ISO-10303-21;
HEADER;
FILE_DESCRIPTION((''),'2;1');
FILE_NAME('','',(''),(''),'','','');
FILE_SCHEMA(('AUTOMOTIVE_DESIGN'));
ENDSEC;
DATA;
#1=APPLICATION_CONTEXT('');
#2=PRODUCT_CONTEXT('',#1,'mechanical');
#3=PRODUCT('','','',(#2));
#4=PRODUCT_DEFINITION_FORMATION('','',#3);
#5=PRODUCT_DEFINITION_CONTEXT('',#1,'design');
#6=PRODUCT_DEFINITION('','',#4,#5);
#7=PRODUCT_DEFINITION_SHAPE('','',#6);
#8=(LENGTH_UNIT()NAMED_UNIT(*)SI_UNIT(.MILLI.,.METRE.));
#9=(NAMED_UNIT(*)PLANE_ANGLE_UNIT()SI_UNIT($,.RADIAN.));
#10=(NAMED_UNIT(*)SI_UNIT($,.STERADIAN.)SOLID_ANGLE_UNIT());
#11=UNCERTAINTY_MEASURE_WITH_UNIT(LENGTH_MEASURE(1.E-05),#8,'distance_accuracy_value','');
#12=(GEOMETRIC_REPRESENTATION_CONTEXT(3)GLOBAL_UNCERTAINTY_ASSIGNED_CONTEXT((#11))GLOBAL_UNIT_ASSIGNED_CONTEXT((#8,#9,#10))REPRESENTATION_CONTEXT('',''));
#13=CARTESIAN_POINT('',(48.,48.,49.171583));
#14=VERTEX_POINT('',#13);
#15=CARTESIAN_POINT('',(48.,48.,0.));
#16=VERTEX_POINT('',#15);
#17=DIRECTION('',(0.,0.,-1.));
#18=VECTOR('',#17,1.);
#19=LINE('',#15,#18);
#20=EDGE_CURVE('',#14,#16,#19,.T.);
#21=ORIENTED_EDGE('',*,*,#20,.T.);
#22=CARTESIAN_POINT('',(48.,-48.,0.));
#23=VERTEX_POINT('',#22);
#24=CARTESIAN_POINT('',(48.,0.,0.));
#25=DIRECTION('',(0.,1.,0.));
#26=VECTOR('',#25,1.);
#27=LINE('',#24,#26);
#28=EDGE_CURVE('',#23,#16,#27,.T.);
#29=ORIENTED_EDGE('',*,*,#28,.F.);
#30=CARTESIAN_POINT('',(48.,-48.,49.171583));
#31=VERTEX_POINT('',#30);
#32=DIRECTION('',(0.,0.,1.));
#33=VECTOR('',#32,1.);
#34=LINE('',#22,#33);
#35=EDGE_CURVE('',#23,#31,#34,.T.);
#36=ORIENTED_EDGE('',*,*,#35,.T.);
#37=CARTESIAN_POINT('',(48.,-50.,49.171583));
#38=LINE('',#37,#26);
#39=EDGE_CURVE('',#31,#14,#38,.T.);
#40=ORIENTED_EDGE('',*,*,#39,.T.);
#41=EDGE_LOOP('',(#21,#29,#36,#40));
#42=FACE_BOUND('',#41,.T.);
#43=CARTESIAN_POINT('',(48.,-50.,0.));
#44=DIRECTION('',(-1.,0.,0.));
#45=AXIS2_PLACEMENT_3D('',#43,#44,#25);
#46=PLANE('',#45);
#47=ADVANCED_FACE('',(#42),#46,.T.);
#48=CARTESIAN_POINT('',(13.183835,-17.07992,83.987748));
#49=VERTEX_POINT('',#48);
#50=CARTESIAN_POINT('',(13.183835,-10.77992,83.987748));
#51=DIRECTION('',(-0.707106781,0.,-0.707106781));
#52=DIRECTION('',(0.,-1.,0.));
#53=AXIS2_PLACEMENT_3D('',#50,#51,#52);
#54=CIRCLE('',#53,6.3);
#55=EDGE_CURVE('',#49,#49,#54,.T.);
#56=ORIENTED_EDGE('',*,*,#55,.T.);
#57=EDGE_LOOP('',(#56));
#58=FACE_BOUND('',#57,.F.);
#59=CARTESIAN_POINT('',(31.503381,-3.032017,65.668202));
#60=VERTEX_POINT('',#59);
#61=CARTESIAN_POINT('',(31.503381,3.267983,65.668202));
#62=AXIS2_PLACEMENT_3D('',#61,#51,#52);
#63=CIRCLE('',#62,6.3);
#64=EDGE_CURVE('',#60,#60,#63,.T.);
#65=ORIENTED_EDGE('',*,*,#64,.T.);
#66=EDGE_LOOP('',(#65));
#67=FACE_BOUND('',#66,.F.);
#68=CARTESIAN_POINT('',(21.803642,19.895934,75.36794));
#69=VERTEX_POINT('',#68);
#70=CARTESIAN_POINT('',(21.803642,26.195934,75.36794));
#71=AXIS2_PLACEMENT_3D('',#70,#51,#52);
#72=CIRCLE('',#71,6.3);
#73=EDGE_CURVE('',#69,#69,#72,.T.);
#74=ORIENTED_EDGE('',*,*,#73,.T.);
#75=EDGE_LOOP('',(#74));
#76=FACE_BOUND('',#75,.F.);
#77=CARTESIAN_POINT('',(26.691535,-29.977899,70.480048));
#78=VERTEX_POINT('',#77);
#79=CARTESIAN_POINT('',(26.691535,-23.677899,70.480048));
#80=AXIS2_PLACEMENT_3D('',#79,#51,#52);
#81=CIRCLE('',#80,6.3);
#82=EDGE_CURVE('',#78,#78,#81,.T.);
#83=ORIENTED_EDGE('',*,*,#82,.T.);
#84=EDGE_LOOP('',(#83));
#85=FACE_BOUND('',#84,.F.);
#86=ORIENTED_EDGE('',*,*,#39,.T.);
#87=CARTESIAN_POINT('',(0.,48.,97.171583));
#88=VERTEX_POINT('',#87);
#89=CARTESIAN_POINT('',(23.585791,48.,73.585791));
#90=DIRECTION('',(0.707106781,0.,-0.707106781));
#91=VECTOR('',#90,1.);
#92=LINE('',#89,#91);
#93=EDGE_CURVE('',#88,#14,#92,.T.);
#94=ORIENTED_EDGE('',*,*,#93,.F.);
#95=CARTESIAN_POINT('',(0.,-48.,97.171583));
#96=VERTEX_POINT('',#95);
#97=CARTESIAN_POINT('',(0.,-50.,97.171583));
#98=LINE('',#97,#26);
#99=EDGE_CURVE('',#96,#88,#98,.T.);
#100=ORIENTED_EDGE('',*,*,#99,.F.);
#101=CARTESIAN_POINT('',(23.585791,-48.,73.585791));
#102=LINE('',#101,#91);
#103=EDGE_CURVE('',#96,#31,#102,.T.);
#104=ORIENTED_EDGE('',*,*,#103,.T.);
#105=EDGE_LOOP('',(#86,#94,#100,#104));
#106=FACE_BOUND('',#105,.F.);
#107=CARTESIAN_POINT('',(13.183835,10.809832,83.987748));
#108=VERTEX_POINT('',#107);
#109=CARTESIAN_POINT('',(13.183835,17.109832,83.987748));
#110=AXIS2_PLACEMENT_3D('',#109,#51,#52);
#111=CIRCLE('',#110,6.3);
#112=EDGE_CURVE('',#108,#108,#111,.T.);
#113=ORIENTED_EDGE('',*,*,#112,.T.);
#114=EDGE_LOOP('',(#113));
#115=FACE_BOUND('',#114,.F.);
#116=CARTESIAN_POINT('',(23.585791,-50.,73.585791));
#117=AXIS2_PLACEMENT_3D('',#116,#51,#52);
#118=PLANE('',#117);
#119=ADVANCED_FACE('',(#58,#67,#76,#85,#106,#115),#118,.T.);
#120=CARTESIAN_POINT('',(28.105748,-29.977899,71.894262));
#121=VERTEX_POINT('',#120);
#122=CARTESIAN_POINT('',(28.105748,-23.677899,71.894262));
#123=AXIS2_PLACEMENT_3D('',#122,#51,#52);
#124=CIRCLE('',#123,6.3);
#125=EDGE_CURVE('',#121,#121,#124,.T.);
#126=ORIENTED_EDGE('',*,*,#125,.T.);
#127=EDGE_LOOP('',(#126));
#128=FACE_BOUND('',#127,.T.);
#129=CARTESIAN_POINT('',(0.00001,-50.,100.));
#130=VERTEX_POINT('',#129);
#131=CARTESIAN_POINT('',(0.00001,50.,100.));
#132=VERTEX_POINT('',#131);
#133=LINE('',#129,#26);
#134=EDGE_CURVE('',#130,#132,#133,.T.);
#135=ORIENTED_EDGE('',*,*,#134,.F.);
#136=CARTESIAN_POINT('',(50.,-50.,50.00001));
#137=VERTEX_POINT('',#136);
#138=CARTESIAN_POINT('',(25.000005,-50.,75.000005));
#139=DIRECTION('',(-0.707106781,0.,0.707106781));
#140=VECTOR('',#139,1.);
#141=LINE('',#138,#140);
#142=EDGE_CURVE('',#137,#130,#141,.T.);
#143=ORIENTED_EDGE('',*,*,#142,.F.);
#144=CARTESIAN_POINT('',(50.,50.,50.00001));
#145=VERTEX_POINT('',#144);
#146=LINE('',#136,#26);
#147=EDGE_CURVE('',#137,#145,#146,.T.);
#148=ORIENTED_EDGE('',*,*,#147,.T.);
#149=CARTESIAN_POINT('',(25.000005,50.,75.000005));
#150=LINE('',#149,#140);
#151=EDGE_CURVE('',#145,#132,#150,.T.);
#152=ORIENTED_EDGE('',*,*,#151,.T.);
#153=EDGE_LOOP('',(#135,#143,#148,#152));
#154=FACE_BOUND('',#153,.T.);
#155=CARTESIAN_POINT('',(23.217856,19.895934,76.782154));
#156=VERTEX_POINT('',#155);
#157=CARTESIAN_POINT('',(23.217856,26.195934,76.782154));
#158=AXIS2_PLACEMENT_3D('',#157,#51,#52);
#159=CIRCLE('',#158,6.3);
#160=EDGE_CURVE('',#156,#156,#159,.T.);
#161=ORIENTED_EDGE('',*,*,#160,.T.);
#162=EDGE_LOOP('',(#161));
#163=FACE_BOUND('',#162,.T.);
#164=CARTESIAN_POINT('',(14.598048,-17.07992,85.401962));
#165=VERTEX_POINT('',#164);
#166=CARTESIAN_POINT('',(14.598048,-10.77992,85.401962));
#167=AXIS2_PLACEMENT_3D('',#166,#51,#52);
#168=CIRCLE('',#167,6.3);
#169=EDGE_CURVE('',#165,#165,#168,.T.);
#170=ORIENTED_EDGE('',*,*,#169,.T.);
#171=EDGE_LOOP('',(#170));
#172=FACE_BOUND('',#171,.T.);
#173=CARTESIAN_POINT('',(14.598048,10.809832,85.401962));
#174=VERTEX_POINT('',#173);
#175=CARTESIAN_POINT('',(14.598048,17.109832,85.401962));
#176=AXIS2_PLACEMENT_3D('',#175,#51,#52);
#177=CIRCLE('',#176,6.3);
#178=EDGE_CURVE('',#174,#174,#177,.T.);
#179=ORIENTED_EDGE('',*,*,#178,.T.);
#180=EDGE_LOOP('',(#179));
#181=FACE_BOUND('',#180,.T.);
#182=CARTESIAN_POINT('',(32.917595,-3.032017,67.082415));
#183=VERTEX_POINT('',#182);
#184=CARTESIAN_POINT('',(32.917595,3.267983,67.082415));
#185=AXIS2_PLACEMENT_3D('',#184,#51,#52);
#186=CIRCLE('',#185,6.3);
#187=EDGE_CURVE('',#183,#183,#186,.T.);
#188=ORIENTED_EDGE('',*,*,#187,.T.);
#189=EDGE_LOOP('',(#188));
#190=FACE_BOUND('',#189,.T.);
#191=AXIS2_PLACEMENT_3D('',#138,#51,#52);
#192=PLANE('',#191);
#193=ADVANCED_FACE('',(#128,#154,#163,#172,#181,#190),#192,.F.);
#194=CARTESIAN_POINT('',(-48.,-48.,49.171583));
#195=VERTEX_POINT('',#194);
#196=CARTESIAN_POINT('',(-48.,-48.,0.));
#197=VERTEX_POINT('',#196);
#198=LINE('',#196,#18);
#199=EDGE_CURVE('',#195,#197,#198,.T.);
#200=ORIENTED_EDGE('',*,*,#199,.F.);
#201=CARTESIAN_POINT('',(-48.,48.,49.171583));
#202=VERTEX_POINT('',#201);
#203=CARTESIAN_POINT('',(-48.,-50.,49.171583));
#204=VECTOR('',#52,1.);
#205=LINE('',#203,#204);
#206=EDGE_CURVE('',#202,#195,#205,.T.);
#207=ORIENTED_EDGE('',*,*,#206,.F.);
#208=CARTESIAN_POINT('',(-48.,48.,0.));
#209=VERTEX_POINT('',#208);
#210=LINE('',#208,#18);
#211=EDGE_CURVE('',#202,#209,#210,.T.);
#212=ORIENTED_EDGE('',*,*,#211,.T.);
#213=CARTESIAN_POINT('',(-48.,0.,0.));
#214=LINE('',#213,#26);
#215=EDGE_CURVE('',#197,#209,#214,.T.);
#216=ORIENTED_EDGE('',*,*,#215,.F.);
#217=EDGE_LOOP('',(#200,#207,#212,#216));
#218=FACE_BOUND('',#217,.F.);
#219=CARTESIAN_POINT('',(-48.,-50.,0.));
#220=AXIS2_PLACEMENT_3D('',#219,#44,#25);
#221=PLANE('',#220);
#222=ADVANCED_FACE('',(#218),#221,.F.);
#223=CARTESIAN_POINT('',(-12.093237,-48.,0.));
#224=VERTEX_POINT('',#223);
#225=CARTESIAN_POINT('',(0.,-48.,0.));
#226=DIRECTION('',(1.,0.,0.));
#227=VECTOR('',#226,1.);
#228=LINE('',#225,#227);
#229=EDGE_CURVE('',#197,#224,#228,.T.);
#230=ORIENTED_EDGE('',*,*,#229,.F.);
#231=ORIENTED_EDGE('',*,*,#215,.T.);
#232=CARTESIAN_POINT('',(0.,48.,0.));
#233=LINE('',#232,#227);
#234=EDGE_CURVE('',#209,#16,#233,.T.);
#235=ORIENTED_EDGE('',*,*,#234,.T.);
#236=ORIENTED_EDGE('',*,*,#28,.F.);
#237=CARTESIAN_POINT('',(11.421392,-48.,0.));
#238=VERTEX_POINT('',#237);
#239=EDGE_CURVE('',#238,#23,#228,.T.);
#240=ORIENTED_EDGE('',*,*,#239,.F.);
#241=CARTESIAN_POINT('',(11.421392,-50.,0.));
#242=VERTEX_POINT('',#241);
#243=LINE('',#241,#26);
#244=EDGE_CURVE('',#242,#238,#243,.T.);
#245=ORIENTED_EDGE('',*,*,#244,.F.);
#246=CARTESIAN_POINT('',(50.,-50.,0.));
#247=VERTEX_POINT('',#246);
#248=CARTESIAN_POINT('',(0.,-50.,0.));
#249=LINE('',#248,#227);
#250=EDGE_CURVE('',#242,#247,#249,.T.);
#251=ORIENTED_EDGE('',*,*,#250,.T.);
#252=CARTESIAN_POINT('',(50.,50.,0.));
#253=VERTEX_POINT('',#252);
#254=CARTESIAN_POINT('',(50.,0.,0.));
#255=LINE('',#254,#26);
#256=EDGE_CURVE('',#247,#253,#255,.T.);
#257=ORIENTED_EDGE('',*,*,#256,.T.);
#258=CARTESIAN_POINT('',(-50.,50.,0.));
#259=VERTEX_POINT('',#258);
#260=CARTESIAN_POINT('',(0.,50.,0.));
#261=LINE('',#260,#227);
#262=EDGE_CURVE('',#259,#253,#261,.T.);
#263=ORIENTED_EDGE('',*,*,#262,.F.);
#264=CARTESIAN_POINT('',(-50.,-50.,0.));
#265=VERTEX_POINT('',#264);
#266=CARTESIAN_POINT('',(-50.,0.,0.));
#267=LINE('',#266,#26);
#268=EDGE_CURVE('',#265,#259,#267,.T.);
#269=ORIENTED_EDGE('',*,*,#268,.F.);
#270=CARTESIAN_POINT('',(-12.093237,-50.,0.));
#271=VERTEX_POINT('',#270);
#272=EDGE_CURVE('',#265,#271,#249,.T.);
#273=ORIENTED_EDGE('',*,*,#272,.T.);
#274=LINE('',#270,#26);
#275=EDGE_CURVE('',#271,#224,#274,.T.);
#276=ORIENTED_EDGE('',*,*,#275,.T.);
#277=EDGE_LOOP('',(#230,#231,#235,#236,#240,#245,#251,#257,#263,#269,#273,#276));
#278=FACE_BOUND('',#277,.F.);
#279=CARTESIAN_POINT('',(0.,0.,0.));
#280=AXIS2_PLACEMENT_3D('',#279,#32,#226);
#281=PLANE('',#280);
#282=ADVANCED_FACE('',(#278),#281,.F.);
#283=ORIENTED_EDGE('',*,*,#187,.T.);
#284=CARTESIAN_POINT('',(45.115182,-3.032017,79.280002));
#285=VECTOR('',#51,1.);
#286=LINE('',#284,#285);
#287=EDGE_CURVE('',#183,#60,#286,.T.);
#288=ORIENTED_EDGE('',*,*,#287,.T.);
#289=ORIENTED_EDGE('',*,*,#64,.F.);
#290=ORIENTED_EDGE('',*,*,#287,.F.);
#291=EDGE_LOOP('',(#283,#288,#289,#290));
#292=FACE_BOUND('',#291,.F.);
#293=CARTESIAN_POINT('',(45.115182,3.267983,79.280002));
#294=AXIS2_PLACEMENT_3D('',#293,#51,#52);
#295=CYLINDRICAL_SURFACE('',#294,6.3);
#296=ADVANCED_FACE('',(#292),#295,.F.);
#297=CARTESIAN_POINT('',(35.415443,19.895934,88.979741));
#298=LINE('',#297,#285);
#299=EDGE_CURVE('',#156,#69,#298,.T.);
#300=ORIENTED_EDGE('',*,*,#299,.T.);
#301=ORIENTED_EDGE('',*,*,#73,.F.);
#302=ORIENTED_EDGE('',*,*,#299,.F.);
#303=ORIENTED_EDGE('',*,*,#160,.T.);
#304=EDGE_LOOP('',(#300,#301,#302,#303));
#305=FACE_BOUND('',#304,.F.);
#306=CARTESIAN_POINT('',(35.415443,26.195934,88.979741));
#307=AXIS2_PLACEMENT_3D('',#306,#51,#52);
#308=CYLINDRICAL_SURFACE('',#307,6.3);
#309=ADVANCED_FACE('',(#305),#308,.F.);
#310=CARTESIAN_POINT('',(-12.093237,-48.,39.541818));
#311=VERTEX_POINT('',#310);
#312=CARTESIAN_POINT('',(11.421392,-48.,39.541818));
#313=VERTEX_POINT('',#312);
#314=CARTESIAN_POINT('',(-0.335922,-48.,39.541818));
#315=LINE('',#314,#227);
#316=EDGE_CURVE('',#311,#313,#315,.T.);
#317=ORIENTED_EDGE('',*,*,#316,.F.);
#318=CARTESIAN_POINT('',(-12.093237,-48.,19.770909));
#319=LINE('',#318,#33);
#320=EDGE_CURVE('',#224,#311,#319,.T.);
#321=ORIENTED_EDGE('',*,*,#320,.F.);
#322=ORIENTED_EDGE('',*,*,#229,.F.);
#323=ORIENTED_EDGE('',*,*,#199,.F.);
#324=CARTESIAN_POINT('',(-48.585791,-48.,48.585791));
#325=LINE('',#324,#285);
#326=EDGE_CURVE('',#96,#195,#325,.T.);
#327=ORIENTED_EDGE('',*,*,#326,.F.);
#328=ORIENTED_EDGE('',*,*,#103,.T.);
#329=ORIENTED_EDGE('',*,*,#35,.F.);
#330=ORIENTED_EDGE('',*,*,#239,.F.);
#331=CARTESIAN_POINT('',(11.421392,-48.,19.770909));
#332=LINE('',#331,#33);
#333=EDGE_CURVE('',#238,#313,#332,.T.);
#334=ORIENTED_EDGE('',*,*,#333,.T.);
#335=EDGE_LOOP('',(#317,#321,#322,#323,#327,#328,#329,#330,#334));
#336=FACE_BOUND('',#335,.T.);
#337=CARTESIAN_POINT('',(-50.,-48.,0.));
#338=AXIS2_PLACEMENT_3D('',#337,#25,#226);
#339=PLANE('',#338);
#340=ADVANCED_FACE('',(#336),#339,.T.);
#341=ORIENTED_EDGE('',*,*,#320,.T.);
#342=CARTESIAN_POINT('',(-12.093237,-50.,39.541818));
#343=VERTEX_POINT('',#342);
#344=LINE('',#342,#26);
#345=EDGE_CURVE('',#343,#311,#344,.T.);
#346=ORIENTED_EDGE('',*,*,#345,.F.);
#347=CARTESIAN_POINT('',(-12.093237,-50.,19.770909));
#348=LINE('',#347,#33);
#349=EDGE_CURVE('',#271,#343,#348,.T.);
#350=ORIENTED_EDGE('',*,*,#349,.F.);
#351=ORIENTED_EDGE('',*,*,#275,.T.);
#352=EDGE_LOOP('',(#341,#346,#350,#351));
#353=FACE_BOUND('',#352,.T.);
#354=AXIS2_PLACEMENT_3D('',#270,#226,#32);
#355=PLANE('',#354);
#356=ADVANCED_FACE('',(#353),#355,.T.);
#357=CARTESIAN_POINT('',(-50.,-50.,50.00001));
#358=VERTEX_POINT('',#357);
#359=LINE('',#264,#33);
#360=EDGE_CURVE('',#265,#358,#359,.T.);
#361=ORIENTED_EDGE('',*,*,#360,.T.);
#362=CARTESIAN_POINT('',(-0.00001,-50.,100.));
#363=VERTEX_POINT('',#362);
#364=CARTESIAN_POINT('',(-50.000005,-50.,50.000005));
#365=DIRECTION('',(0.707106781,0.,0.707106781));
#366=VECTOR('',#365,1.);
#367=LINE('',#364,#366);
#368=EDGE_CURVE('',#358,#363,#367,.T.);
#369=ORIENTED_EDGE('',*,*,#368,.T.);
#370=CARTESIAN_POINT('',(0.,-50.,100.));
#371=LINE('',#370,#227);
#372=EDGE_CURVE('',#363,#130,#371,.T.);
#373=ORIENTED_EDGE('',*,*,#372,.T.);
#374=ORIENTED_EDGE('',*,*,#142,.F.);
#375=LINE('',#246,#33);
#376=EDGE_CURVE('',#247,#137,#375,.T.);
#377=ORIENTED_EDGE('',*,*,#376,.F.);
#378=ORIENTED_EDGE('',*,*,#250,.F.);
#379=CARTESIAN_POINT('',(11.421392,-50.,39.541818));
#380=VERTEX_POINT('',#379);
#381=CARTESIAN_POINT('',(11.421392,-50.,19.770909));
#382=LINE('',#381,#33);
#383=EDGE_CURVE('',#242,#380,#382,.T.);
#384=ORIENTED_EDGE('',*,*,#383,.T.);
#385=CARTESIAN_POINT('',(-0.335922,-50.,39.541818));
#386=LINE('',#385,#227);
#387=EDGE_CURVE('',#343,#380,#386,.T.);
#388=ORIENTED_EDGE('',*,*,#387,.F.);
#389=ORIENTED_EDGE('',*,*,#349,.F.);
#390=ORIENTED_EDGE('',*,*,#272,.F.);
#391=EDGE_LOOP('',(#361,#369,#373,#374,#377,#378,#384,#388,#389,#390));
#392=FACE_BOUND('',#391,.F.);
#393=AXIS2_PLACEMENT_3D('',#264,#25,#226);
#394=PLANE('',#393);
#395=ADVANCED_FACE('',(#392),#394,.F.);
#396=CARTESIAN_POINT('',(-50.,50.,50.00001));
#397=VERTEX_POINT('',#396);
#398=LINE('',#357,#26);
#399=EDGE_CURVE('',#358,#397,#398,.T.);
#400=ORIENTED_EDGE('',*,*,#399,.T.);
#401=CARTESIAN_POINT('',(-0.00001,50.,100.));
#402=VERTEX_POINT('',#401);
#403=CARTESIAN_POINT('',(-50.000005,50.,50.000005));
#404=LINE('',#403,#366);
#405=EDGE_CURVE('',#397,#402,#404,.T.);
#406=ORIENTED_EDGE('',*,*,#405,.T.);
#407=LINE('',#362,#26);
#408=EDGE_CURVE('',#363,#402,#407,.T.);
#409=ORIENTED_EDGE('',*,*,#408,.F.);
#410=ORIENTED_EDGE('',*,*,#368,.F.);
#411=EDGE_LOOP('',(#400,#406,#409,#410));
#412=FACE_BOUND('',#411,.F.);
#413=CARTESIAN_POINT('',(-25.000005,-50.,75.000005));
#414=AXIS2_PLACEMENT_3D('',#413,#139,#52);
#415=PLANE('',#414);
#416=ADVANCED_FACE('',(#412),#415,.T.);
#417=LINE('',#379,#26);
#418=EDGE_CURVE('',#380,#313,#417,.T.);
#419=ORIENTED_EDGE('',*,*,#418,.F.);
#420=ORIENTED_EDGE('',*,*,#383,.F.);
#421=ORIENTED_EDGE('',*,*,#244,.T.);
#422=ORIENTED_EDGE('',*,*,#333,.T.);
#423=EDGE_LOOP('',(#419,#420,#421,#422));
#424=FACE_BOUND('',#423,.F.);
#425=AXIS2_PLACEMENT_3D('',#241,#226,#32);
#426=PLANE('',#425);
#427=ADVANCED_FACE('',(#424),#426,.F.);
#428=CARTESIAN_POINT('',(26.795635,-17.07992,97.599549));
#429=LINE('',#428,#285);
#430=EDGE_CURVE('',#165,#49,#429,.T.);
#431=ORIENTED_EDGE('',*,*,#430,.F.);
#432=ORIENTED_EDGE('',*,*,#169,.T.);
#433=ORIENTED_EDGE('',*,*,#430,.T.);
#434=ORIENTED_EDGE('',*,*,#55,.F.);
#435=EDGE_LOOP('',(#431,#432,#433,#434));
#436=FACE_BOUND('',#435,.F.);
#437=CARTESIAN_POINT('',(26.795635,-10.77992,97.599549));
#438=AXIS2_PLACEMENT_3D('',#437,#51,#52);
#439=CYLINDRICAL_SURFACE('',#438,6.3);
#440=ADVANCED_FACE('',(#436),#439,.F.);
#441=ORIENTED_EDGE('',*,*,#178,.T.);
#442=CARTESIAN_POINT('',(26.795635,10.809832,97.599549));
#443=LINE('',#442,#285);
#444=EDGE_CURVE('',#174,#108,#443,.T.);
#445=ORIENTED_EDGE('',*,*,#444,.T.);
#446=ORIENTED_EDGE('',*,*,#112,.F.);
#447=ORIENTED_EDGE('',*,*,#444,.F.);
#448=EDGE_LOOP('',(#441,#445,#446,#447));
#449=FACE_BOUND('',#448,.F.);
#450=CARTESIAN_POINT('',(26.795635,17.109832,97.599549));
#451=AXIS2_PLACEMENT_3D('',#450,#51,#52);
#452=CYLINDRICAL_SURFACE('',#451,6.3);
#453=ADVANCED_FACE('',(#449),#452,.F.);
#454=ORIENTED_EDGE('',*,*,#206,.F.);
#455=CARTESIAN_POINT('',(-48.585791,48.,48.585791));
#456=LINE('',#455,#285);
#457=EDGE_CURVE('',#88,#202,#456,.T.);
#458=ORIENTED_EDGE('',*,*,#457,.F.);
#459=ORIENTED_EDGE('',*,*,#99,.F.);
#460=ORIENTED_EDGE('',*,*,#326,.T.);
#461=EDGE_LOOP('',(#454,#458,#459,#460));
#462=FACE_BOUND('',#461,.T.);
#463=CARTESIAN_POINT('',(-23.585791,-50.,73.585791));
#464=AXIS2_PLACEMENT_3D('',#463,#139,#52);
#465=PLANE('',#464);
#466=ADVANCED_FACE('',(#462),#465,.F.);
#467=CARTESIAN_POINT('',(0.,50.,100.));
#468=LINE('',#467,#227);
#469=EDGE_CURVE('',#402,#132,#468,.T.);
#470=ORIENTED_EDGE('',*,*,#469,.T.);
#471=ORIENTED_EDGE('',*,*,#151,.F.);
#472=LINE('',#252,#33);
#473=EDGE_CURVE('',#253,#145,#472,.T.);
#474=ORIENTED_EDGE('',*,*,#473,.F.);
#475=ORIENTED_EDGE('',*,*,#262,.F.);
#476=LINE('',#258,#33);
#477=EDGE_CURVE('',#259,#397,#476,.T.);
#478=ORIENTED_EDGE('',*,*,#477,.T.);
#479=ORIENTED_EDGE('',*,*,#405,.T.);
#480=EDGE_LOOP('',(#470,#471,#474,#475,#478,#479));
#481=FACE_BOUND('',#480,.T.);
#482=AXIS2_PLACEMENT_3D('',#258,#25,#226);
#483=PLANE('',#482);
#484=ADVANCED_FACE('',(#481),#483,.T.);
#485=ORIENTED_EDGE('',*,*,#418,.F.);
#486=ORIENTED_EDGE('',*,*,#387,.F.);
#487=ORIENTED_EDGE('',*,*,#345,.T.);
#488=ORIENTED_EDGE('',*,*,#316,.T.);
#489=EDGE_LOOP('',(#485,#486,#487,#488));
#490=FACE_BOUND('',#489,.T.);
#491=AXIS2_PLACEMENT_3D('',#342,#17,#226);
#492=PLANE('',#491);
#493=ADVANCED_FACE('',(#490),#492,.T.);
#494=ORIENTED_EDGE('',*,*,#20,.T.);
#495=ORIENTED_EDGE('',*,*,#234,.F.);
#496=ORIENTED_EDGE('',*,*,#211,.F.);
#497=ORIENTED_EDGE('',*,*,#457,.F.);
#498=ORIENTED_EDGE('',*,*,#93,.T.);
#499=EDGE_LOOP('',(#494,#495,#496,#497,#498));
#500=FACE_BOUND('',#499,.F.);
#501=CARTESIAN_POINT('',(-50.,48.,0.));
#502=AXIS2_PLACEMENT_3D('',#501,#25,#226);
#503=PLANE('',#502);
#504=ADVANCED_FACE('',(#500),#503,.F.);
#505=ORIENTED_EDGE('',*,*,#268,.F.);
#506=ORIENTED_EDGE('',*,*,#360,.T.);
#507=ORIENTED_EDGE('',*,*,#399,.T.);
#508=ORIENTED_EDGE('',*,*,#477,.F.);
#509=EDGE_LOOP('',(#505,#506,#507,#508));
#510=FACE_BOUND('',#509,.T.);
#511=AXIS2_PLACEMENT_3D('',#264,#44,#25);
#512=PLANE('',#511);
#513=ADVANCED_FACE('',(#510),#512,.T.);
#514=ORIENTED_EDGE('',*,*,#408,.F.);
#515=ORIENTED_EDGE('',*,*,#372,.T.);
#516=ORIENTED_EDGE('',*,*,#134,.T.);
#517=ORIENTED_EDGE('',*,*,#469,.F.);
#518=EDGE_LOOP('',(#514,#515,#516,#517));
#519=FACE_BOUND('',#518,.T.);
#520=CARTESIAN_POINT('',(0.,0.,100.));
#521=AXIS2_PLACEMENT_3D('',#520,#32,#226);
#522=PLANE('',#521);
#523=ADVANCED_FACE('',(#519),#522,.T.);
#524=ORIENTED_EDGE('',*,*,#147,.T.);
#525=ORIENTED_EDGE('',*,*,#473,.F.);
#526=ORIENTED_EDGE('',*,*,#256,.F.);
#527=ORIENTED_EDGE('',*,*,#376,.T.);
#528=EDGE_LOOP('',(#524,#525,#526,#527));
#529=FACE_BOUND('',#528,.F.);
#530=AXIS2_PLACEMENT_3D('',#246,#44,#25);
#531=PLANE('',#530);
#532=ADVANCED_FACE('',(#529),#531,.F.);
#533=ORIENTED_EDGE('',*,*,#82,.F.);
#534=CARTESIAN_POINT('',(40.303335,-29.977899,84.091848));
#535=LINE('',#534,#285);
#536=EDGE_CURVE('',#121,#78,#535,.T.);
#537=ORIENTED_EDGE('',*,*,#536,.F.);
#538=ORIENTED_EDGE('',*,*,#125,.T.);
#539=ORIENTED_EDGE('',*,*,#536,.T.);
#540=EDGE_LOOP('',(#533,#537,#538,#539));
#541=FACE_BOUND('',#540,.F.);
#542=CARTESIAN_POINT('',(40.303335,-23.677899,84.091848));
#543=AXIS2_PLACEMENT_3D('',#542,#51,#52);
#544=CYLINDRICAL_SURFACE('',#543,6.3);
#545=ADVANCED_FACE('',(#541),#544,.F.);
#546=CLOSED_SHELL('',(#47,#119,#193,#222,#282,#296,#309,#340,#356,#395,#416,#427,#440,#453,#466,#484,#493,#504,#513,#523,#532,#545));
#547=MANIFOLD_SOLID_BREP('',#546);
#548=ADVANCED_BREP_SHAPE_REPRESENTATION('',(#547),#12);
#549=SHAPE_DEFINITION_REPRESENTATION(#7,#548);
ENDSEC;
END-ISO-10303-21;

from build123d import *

# Parameters (mm, degrees)
F0_W     = 100
F0_H     = 100
F1_DEPTH = 100
F2_SIZE2 = 49.99999
F2_SIZE  = 49.99999
F3_T     = -2
F4_W     = 23.5146284103
F4_H     = 39.5418182015
F5_DEPTH = 2
F7_D     = 12.6
F7_DEPTH = 17.25
F7_TIP   = 3.7854218999


# Not quite as in the source:
# - a fillet or chamfer is up to 0.001 mm smaller than in the source, because OpenCascade refuses the exact size


with BuildPart() as f1:
    # F0 (on Top) → F1 (new body)
    with BuildSketch(Plane.XY):
        Rectangle(F0_W, F0_H)
    extrude(amount=F1_DEPTH)

    # F2 (size 50 and 50 in the source; OpenCascade refuses exactly that, so slightly less here)
    f2_edges = [f1.edges().sort_by_distance(p)[0] for p in [
        (-50, 0, 100),
        (50, 0, 100),
    ]]
    chamfer(f2_edges, length=F2_SIZE, length2=F2_SIZE2)

    # F3
    f3_openings = [f1.faces().sort_by_distance(p)[0] for p in [
        (0, 0, 0),
    ]]
    offset(amount=F3_T, openings=f3_openings)

    # F4 (on face) → F5 (cut, through all)
    with BuildSketch(Plane.XZ.offset(50)):
        with Locations((-0.3359224647, 19.7709091008)):
            Rectangle(F4_W, F4_H)
    extrude(amount=-F5_DEPTH, mode=Mode.SUBTRACT)

    # F7
    with Locations(Plane(origin=(50, 0, 50), x_dir=(0, 1, 0), z_dir=(0.7071067812, 0, 0.7071067812))):
        with Locations((17.1098317951, 50.0659272075), (-10.7799200341, 50.0659272075), (-23.6778985709, 30.9631545097), (3.2679832075, 24.1581760347), (26.1959340423, 37.8756783903)):
            Hole(F7_D / 2, depth=F7_DEPTH)
            with Locations((0, 0, -(F7_DEPTH + F7_TIP / 2))):  # 118° drill point
                Cone(0, F7_D / 2, F7_TIP, mode=Mode.SUBTRACT)


solid = f1.part
